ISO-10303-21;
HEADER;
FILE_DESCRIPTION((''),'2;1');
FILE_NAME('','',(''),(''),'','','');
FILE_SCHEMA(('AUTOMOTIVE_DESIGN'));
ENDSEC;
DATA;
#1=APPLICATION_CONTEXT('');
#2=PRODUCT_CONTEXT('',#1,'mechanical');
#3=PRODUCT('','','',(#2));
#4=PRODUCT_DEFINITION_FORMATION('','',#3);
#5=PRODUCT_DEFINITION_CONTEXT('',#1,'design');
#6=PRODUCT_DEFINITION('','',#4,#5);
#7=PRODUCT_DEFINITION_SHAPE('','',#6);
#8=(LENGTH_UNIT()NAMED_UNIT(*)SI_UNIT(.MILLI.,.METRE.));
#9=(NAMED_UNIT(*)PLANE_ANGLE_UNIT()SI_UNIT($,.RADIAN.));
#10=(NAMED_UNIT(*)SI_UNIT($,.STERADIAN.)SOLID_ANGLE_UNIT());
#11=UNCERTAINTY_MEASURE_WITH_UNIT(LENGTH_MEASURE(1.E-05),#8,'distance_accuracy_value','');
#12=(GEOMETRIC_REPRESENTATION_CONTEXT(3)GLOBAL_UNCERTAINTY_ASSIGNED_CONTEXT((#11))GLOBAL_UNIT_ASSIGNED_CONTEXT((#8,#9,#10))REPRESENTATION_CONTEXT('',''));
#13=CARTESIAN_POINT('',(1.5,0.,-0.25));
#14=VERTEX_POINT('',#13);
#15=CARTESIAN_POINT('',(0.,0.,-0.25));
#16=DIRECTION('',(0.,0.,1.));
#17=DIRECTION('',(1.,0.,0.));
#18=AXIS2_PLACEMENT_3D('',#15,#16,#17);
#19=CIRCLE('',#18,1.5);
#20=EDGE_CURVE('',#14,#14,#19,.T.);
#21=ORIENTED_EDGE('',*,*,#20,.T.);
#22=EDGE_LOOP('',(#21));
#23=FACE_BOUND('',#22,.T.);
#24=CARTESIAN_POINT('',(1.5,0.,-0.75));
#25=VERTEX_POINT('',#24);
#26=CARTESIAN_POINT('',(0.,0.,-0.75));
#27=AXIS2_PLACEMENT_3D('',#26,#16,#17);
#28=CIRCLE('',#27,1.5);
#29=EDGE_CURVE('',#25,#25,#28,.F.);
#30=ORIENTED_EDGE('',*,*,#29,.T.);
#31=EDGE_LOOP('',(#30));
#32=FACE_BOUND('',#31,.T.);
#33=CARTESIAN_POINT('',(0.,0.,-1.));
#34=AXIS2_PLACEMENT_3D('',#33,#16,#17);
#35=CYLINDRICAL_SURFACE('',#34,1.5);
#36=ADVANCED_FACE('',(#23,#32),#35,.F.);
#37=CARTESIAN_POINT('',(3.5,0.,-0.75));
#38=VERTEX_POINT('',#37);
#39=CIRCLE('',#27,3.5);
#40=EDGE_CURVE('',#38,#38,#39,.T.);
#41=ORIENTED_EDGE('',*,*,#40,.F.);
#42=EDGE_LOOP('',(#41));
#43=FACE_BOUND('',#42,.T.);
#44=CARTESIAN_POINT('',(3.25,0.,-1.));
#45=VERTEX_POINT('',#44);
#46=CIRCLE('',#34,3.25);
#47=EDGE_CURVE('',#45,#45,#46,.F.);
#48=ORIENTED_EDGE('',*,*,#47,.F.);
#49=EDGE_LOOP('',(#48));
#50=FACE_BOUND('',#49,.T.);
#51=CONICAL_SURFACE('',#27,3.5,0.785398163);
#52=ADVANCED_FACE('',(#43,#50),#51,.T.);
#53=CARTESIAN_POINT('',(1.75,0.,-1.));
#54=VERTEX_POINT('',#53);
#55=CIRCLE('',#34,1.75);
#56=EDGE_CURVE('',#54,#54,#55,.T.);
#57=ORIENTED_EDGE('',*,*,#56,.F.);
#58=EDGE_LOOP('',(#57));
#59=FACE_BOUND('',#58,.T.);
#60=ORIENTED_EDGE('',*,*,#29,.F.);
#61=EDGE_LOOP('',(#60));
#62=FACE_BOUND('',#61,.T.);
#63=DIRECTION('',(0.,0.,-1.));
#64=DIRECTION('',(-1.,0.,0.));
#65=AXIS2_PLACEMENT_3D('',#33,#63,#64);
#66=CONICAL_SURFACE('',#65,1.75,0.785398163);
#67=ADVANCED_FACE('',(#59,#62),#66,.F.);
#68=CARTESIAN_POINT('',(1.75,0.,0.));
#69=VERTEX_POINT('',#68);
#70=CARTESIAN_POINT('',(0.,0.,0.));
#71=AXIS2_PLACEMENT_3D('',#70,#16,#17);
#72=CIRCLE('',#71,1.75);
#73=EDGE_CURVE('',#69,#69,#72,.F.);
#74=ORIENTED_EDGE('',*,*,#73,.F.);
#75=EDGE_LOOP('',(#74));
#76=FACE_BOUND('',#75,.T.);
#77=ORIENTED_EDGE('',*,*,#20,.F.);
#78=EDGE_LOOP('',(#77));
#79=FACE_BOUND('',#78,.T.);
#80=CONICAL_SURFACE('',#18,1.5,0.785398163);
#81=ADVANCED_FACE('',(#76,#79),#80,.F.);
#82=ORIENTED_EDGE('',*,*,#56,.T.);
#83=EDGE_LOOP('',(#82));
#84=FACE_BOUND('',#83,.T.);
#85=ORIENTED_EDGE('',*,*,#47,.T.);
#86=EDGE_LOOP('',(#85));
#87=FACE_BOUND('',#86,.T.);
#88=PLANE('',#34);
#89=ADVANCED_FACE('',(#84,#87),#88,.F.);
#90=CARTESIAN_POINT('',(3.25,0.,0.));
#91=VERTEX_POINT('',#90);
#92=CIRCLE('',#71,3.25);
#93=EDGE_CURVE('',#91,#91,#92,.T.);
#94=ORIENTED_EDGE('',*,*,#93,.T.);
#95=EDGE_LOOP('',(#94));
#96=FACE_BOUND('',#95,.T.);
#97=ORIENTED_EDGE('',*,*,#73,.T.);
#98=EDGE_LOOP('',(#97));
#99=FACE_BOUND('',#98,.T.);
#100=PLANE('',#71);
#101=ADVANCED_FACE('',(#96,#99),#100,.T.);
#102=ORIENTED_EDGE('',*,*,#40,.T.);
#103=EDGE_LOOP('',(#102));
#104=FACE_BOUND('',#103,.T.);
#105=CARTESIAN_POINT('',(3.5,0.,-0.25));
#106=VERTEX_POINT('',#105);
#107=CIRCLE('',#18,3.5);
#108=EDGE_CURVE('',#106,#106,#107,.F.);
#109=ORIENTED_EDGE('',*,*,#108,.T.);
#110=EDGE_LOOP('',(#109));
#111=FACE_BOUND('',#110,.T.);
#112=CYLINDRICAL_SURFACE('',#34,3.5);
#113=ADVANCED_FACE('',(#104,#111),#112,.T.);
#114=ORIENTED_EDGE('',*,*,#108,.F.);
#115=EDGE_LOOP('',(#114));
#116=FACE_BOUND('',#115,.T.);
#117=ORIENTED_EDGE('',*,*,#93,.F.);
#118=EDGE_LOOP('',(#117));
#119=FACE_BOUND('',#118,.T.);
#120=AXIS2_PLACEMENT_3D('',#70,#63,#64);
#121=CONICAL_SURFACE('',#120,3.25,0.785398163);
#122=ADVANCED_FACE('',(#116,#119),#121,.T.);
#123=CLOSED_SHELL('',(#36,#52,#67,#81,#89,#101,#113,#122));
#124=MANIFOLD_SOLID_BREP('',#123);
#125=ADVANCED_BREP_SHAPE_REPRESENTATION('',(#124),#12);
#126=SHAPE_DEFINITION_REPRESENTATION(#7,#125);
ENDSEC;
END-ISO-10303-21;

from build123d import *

# Parameters (mm, degrees)
SKETCH2_R          = 3.5
SKETCH2_R_2        = 1.5
BASE_FLANGE1_DEPTH = 1
CHAMFER1_SIZE      = 0.25


# Sheet-metal steps are written as plain solids
with BuildPart() as part:
    # Sketch2 → Base-Flange1 (new body)
    with BuildSketch(Plane.XY):
        Circle(SKETCH2_R)
        Circle(SKETCH2_R_2, mode=Mode.SUBTRACT)
    extrude(amount=-BASE_FLANGE1_DEPTH)

    # Chamfer1
    chamfer1_edges = [part.edges().sort_by_distance(p)[0] for p in [
        (-3.5, 0, 0),
        (-3.5, 0, -1),
        (-1.5, 0, -1),
        (-1.5, 0, 0),
    ]]
    chamfer(chamfer1_edges, length=CHAMFER1_SIZE)


solid = part.part
